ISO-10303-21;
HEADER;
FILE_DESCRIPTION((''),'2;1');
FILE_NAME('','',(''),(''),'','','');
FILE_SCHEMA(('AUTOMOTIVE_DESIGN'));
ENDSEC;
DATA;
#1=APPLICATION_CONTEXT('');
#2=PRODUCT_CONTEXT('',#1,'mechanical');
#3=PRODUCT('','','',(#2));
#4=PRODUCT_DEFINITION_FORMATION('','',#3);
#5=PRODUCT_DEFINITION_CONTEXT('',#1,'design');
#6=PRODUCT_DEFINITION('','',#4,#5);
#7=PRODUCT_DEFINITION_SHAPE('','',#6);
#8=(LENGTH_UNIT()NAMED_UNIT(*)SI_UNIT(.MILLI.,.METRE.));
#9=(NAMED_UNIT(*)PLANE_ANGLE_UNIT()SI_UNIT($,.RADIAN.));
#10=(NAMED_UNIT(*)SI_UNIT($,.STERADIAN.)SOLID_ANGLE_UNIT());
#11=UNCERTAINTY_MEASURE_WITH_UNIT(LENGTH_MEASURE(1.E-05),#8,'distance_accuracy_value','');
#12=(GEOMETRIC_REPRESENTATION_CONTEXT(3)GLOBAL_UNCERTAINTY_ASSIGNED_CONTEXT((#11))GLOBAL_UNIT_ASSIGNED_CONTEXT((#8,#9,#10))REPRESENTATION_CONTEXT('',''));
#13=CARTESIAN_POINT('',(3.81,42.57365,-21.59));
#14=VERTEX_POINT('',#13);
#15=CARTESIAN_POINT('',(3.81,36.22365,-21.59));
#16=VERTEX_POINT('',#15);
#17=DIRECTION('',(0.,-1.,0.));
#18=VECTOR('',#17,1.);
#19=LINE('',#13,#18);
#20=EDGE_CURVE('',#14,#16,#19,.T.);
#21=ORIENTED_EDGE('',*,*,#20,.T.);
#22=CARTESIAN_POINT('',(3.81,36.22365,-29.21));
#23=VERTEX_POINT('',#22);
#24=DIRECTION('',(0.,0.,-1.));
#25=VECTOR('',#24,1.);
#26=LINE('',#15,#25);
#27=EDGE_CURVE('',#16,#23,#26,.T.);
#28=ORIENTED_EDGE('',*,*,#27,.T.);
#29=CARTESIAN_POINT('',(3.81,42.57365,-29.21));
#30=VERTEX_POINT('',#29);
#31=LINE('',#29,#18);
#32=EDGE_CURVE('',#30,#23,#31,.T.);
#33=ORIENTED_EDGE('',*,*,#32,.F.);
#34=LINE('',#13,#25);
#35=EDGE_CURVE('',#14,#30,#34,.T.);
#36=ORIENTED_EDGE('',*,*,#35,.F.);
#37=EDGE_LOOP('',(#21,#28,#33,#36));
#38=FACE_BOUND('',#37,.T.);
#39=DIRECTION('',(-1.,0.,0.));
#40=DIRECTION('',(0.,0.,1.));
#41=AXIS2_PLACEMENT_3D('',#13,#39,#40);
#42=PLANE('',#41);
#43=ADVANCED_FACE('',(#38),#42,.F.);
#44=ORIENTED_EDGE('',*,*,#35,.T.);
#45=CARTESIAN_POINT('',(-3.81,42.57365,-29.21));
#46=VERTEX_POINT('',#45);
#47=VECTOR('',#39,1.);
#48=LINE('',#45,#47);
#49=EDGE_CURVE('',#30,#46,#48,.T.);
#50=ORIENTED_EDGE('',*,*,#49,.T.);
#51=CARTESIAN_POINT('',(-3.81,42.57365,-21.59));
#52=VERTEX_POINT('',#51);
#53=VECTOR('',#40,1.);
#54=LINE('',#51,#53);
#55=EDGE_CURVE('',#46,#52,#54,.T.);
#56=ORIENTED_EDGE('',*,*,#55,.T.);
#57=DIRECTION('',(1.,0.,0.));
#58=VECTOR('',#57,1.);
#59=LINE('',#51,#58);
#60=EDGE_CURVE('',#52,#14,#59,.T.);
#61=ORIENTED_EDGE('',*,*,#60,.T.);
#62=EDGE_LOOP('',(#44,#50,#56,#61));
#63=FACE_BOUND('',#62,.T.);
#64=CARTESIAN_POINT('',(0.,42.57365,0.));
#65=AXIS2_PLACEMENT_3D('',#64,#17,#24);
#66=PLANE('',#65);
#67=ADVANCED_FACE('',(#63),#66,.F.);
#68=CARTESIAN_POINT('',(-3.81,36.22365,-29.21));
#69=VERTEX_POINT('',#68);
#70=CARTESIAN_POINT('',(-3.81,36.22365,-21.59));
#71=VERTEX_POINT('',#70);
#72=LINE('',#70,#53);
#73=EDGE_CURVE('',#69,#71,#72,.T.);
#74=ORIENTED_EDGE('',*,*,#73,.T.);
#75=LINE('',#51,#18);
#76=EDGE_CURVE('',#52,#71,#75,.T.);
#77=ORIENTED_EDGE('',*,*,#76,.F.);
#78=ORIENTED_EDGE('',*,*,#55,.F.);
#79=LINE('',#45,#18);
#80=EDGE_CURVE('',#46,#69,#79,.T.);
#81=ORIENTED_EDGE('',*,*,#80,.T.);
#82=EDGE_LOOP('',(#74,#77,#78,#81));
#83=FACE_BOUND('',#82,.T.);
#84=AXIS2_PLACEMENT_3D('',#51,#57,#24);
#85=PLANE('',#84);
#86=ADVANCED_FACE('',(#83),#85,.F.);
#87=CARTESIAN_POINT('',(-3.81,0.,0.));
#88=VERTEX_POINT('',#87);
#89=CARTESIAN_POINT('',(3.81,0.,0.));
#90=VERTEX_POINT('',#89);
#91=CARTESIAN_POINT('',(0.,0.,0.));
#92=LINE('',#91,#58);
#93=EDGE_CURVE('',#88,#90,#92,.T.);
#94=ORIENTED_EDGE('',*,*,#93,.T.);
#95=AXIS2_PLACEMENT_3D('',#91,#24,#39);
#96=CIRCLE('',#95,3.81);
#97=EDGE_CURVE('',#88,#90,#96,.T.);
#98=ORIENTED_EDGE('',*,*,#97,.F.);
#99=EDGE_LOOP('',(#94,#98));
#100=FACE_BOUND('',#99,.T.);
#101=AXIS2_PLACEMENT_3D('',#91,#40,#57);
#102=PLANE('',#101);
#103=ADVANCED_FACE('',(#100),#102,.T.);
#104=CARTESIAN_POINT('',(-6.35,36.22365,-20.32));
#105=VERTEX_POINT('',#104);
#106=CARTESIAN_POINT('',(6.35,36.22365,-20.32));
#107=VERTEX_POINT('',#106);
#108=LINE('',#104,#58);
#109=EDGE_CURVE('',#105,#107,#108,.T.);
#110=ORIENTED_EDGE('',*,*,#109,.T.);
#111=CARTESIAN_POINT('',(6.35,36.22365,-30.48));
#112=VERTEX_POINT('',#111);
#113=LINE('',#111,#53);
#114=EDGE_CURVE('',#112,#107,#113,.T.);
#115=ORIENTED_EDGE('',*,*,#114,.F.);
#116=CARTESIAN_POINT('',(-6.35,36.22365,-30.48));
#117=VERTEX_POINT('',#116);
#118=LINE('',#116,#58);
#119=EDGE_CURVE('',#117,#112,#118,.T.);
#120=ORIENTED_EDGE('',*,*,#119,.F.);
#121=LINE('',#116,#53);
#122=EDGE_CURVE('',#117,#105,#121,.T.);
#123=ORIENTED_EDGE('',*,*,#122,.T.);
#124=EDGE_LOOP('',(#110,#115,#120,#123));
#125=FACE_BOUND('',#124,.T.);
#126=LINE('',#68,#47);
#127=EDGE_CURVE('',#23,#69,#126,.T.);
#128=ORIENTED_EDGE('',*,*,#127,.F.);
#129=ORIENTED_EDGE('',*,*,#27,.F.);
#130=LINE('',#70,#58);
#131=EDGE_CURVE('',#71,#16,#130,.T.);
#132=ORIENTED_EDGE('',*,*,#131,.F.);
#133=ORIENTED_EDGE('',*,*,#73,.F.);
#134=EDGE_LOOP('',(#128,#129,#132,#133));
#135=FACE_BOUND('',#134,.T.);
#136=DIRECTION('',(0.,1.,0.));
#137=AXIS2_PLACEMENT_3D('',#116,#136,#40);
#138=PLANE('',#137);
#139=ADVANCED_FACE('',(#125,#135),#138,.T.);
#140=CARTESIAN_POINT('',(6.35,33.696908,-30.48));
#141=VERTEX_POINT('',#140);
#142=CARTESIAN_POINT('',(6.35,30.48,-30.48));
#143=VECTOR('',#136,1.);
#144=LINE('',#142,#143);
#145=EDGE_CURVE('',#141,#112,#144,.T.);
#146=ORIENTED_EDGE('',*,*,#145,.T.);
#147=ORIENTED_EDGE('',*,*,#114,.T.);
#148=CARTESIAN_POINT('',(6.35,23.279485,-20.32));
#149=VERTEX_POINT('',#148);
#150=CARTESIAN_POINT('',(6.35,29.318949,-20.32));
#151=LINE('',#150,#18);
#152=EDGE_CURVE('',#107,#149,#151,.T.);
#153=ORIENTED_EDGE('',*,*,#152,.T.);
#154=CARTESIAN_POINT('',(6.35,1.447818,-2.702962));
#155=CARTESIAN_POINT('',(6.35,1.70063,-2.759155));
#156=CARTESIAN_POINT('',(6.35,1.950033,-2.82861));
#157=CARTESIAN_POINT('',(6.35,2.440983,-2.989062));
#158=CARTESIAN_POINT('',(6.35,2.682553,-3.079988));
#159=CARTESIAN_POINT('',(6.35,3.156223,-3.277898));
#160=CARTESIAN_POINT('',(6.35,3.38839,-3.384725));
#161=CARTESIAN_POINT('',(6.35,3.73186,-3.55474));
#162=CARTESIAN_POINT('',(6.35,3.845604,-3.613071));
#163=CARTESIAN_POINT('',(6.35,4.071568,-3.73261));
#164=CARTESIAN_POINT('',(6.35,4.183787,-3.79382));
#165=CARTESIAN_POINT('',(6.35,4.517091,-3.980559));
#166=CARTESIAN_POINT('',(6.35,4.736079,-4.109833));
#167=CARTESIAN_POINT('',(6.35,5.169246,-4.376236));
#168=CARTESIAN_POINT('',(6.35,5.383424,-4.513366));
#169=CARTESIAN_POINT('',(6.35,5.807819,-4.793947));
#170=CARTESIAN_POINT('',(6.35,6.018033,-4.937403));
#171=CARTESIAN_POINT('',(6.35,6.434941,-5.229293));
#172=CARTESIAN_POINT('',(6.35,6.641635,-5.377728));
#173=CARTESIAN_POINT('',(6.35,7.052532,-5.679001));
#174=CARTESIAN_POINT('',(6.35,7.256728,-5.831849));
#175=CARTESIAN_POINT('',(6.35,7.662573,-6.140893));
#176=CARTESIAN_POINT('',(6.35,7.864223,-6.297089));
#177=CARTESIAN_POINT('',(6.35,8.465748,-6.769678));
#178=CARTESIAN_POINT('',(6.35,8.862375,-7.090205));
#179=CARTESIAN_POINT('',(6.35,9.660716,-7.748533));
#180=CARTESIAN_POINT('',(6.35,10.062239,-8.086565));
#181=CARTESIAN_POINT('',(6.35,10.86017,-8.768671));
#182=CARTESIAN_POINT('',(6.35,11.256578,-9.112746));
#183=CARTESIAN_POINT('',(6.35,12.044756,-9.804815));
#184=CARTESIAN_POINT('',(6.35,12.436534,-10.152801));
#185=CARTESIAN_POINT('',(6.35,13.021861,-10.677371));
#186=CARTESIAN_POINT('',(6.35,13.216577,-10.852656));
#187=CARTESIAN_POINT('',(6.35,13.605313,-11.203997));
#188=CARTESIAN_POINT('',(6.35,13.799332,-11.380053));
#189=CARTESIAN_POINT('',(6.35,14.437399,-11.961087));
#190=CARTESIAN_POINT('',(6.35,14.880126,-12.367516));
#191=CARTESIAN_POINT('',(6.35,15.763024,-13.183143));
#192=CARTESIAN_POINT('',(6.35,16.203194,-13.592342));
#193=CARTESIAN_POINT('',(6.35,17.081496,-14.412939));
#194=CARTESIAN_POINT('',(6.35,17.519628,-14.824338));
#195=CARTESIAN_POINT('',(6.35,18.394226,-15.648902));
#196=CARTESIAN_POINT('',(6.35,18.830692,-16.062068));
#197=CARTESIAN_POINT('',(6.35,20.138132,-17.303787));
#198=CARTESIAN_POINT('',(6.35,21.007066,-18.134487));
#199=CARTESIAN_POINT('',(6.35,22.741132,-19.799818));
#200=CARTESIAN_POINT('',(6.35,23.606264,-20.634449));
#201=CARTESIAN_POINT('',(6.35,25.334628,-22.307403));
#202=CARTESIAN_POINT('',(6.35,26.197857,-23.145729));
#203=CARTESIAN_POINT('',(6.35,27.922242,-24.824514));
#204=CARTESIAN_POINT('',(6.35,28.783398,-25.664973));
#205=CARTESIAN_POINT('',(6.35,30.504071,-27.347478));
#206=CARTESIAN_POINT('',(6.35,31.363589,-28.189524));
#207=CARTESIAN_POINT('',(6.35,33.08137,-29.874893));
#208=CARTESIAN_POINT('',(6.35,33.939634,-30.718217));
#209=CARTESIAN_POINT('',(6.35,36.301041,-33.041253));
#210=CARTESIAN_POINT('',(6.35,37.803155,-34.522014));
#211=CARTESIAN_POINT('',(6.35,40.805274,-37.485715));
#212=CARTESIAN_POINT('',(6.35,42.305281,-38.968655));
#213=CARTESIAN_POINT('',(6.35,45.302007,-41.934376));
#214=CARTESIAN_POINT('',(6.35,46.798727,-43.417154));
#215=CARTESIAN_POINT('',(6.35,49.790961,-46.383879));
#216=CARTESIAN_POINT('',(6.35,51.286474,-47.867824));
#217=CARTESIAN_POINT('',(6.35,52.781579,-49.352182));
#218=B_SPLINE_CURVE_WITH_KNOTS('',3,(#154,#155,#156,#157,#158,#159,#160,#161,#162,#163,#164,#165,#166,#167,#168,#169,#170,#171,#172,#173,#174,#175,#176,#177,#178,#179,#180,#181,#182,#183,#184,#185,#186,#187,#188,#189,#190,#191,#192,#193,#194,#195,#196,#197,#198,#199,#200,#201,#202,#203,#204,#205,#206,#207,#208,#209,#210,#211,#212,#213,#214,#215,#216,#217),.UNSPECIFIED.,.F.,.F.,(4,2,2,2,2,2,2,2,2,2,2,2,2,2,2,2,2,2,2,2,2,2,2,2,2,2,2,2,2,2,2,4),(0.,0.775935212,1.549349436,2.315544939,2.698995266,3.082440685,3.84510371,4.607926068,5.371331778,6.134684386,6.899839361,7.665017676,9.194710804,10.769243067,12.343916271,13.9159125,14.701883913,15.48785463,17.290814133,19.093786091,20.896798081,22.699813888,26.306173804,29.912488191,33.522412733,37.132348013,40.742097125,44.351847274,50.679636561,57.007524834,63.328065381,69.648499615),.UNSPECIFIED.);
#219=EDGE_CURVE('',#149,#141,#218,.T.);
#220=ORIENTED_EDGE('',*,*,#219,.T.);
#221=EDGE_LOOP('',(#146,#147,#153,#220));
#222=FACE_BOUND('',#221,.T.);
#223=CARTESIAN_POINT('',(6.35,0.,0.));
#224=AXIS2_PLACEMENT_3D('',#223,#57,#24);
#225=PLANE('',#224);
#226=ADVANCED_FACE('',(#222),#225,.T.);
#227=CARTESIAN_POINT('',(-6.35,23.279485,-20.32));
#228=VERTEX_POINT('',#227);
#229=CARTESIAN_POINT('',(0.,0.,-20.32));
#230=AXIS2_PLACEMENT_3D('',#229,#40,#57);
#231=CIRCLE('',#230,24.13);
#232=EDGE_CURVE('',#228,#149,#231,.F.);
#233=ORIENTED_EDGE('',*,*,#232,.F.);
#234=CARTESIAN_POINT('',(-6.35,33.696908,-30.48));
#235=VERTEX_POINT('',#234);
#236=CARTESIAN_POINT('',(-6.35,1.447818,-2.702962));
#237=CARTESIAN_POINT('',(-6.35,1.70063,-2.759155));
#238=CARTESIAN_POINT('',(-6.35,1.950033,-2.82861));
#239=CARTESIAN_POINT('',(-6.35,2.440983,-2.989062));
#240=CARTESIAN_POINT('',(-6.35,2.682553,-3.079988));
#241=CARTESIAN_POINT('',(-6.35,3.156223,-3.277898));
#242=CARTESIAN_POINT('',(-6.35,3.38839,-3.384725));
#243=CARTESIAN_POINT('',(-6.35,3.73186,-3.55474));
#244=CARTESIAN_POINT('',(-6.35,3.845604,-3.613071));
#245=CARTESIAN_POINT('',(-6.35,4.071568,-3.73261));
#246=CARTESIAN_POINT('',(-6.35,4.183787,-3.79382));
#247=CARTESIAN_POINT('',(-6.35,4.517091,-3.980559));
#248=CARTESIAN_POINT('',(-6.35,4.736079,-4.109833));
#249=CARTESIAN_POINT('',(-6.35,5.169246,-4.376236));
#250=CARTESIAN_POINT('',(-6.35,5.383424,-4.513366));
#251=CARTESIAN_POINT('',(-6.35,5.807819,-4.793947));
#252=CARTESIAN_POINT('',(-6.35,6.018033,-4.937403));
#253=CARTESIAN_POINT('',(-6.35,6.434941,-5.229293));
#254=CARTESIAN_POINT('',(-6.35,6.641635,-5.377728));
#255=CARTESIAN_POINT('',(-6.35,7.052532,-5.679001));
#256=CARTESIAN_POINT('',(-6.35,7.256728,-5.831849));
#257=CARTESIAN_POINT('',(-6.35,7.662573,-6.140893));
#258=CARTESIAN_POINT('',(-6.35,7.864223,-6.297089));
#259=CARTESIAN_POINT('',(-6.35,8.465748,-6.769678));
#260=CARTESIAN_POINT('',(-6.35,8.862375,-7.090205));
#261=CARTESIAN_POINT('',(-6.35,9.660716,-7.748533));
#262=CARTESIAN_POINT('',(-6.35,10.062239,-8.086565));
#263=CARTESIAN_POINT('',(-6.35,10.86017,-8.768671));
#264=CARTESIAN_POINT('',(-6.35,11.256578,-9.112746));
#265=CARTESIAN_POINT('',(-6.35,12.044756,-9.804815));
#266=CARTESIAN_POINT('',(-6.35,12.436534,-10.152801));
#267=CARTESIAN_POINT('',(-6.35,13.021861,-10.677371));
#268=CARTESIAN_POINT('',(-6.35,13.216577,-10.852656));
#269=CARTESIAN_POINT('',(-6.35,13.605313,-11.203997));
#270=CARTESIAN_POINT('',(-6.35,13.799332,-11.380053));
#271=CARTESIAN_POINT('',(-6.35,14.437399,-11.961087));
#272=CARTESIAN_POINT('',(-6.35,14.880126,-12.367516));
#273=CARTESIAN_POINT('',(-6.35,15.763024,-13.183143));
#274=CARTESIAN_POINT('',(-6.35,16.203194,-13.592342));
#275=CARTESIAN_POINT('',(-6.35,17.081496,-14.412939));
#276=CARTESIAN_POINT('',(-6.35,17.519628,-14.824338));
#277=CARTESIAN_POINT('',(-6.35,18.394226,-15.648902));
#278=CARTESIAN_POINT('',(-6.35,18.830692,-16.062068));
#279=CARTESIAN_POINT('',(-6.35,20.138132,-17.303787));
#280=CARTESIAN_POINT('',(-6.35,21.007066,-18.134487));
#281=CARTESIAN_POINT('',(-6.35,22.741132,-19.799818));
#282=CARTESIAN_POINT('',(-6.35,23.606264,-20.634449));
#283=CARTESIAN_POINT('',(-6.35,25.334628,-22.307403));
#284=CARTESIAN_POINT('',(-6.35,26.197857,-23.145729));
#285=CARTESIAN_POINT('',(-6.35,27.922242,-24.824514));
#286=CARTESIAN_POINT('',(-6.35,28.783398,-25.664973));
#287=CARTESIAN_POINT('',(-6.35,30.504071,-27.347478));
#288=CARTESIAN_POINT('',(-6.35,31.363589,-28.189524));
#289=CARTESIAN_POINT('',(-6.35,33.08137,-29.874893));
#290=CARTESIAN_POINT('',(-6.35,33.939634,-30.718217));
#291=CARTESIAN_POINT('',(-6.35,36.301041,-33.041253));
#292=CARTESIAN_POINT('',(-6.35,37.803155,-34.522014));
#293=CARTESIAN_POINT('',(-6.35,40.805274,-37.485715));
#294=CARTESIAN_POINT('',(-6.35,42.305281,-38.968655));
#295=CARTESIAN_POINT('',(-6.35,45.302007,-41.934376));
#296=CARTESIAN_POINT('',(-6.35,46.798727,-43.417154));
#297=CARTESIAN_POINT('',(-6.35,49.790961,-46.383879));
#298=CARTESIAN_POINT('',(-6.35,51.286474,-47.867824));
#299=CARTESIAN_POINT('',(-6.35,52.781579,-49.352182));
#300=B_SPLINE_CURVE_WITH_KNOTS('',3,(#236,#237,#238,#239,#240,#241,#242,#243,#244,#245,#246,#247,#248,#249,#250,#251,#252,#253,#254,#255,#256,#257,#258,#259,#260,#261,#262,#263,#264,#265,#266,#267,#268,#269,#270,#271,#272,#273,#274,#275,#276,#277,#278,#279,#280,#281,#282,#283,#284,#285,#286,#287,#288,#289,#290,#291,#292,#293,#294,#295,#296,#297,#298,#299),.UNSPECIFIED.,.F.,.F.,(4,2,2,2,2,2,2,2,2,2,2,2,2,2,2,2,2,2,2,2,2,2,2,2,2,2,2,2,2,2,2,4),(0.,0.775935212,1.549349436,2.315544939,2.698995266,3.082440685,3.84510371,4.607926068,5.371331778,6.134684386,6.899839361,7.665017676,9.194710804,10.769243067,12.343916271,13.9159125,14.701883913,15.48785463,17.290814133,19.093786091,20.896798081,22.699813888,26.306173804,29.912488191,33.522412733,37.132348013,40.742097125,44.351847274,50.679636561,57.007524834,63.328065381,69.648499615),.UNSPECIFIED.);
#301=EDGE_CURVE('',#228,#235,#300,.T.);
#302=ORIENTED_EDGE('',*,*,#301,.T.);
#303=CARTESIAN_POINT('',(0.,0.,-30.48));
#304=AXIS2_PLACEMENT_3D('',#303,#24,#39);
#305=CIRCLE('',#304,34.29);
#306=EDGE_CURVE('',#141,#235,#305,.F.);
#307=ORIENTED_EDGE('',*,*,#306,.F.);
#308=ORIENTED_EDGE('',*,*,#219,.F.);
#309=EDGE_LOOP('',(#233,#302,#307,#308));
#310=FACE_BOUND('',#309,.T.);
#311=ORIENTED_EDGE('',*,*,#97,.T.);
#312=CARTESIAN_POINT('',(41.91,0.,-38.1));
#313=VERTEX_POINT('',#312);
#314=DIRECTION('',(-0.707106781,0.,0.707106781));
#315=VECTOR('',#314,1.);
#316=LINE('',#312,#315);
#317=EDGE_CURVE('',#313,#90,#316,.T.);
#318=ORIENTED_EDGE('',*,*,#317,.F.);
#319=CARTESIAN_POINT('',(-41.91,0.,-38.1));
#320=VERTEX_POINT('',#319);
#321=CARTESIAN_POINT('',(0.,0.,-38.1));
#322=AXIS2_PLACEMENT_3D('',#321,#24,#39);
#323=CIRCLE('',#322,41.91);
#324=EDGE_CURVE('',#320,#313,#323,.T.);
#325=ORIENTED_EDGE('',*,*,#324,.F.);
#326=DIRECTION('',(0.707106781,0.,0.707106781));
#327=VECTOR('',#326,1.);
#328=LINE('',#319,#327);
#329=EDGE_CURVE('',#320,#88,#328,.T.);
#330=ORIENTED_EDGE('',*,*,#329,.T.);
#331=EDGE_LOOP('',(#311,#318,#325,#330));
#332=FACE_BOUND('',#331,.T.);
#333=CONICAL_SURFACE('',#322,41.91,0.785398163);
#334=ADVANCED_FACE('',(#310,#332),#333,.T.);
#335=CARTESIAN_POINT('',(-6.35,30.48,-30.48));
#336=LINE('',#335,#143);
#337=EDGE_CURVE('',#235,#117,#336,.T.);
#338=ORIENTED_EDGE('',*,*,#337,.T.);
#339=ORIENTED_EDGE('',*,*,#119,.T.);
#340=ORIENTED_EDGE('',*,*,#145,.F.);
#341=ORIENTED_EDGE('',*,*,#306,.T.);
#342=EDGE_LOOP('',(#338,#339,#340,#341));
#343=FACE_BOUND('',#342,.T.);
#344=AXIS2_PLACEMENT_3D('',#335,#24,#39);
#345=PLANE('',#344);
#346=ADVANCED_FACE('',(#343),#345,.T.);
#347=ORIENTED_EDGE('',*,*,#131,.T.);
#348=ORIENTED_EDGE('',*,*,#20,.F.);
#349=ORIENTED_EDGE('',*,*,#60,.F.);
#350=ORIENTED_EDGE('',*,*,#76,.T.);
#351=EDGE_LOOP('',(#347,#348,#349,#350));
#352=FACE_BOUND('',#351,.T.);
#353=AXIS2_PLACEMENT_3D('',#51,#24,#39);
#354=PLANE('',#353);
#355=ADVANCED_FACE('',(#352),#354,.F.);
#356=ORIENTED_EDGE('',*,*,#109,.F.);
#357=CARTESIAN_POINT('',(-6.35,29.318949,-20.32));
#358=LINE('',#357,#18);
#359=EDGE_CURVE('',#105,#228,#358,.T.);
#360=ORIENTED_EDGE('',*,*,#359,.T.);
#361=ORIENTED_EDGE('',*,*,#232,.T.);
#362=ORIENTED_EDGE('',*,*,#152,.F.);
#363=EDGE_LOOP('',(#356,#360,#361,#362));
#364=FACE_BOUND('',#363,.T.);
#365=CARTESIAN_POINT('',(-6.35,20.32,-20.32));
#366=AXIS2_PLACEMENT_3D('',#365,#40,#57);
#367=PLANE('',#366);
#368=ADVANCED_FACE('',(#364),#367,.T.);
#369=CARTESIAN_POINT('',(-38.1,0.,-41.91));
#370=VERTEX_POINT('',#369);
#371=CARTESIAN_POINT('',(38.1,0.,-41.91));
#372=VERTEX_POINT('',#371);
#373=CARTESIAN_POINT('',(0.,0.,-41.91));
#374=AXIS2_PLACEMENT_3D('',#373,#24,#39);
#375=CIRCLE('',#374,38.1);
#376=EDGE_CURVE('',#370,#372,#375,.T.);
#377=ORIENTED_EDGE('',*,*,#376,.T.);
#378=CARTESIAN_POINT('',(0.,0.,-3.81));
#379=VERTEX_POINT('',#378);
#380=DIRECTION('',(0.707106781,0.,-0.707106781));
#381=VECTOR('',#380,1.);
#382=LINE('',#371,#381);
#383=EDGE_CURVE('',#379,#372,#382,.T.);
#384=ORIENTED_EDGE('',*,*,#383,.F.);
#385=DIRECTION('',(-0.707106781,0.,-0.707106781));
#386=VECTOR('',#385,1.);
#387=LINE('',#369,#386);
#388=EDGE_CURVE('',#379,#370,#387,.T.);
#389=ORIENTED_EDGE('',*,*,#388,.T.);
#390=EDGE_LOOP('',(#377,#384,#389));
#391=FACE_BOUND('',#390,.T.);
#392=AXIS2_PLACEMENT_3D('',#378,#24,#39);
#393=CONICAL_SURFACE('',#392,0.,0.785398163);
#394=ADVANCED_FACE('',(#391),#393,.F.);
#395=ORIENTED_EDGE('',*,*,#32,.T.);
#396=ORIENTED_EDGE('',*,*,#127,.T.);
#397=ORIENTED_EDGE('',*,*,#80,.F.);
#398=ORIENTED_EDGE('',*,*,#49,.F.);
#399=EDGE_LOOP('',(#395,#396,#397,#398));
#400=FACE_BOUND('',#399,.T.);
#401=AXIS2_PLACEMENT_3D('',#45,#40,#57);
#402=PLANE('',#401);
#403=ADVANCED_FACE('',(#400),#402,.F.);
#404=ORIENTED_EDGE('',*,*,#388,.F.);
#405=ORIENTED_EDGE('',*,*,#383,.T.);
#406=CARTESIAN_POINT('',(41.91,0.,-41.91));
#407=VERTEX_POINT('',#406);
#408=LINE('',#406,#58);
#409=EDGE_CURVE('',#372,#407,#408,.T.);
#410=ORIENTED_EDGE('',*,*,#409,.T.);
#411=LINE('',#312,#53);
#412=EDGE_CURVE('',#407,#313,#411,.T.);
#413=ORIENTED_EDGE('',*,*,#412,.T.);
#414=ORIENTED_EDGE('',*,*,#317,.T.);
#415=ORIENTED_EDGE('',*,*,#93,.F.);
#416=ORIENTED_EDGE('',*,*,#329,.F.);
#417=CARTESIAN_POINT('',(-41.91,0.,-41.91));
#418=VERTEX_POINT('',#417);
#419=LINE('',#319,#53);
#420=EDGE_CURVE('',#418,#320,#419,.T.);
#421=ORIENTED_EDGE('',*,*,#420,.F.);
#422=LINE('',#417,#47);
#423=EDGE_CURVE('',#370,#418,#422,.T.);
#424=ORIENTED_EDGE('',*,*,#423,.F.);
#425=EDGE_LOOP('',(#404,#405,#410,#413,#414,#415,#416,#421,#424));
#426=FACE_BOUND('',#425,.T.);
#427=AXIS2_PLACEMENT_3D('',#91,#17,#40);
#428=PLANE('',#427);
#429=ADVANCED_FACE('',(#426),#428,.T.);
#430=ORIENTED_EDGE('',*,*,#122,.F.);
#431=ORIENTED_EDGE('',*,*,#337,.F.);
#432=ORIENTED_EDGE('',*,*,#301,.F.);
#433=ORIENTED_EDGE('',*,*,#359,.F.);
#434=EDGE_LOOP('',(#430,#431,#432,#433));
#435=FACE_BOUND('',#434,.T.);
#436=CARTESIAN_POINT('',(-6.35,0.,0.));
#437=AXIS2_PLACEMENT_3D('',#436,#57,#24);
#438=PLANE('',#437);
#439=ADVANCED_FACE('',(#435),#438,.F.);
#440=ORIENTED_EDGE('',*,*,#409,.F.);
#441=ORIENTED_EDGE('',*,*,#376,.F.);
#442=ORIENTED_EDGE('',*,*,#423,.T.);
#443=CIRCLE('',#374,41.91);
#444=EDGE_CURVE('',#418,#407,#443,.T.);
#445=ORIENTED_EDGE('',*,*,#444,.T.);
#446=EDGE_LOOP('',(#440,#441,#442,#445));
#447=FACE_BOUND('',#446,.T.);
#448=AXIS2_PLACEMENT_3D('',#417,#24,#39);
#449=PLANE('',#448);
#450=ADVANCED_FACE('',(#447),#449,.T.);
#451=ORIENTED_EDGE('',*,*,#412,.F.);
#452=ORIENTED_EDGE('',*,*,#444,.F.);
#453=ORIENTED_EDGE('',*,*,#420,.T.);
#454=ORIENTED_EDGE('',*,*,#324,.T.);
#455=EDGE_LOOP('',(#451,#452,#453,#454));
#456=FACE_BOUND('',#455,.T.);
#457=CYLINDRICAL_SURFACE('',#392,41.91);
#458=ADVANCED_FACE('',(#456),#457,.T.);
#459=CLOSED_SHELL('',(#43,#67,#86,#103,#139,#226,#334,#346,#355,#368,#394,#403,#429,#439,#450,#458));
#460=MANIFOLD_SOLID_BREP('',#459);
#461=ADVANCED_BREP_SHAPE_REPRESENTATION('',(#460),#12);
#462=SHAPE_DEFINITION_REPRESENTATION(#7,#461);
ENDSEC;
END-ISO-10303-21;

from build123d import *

# Parameters (mm, degrees)
REVOLVE2_ANGLE           = 180
BOSS_EXTRUDE1_DEPTH      = 6.35
BOSS_EXTRUDE1_DEPTH_BACK = 6.35
SKETCH10_W               = 7.62
SKETCH10_H               = 7.62
BOSS_EXTRUDE2_DEPTH      = 6.35


# Read off the part's stored shape, not the designer's step: Revolve2
with BuildPart() as part:
    # Revolve2 outline → Revolve2 (revolve)
    with BuildSketch(Plane.XZ):
        Polygon((3.81, 0), (0, 0), (0, -3.81), (38.1, -41.91), (41.91, -41.91), (41.91, -38.1), align=None)
    revolve(axis=Axis((0, 0, 0), (0, 0, 1)), revolution_arc=REVOLVE2_ANGLE)

    # Sketch6 → Boss-Extrude1 (add, two sides: drawn at the far end of the back side and taken through both)
    with BuildSketch(Plane(origin=(0, 0, 0), x_dir=(0, 0, -1), z_dir=(1, 0, 0)).offset(-BOSS_EXTRUDE1_DEPTH_BACK)):
        Polygon((20.32, 20.32), (20.32, 29.318948776), (20.32, 36.223650293), (30.48, 36.223650293), (30.48, 30.48), align=None)
    extrude(amount=BOSS_EXTRUDE1_DEPTH + BOSS_EXTRUDE1_DEPTH_BACK)

    # Sketch10 → Boss-Extrude2 (add)
    with BuildSketch(Plane(origin=(0, 36.223650293, 0), x_dir=(1, 0, 0), z_dir=(0, 1, 0))):
        with Locations((0, 25.4)):
            Rectangle(SKETCH10_W, SKETCH10_H)
    extrude(amount=BOSS_EXTRUDE2_DEPTH)


solid = part.part
